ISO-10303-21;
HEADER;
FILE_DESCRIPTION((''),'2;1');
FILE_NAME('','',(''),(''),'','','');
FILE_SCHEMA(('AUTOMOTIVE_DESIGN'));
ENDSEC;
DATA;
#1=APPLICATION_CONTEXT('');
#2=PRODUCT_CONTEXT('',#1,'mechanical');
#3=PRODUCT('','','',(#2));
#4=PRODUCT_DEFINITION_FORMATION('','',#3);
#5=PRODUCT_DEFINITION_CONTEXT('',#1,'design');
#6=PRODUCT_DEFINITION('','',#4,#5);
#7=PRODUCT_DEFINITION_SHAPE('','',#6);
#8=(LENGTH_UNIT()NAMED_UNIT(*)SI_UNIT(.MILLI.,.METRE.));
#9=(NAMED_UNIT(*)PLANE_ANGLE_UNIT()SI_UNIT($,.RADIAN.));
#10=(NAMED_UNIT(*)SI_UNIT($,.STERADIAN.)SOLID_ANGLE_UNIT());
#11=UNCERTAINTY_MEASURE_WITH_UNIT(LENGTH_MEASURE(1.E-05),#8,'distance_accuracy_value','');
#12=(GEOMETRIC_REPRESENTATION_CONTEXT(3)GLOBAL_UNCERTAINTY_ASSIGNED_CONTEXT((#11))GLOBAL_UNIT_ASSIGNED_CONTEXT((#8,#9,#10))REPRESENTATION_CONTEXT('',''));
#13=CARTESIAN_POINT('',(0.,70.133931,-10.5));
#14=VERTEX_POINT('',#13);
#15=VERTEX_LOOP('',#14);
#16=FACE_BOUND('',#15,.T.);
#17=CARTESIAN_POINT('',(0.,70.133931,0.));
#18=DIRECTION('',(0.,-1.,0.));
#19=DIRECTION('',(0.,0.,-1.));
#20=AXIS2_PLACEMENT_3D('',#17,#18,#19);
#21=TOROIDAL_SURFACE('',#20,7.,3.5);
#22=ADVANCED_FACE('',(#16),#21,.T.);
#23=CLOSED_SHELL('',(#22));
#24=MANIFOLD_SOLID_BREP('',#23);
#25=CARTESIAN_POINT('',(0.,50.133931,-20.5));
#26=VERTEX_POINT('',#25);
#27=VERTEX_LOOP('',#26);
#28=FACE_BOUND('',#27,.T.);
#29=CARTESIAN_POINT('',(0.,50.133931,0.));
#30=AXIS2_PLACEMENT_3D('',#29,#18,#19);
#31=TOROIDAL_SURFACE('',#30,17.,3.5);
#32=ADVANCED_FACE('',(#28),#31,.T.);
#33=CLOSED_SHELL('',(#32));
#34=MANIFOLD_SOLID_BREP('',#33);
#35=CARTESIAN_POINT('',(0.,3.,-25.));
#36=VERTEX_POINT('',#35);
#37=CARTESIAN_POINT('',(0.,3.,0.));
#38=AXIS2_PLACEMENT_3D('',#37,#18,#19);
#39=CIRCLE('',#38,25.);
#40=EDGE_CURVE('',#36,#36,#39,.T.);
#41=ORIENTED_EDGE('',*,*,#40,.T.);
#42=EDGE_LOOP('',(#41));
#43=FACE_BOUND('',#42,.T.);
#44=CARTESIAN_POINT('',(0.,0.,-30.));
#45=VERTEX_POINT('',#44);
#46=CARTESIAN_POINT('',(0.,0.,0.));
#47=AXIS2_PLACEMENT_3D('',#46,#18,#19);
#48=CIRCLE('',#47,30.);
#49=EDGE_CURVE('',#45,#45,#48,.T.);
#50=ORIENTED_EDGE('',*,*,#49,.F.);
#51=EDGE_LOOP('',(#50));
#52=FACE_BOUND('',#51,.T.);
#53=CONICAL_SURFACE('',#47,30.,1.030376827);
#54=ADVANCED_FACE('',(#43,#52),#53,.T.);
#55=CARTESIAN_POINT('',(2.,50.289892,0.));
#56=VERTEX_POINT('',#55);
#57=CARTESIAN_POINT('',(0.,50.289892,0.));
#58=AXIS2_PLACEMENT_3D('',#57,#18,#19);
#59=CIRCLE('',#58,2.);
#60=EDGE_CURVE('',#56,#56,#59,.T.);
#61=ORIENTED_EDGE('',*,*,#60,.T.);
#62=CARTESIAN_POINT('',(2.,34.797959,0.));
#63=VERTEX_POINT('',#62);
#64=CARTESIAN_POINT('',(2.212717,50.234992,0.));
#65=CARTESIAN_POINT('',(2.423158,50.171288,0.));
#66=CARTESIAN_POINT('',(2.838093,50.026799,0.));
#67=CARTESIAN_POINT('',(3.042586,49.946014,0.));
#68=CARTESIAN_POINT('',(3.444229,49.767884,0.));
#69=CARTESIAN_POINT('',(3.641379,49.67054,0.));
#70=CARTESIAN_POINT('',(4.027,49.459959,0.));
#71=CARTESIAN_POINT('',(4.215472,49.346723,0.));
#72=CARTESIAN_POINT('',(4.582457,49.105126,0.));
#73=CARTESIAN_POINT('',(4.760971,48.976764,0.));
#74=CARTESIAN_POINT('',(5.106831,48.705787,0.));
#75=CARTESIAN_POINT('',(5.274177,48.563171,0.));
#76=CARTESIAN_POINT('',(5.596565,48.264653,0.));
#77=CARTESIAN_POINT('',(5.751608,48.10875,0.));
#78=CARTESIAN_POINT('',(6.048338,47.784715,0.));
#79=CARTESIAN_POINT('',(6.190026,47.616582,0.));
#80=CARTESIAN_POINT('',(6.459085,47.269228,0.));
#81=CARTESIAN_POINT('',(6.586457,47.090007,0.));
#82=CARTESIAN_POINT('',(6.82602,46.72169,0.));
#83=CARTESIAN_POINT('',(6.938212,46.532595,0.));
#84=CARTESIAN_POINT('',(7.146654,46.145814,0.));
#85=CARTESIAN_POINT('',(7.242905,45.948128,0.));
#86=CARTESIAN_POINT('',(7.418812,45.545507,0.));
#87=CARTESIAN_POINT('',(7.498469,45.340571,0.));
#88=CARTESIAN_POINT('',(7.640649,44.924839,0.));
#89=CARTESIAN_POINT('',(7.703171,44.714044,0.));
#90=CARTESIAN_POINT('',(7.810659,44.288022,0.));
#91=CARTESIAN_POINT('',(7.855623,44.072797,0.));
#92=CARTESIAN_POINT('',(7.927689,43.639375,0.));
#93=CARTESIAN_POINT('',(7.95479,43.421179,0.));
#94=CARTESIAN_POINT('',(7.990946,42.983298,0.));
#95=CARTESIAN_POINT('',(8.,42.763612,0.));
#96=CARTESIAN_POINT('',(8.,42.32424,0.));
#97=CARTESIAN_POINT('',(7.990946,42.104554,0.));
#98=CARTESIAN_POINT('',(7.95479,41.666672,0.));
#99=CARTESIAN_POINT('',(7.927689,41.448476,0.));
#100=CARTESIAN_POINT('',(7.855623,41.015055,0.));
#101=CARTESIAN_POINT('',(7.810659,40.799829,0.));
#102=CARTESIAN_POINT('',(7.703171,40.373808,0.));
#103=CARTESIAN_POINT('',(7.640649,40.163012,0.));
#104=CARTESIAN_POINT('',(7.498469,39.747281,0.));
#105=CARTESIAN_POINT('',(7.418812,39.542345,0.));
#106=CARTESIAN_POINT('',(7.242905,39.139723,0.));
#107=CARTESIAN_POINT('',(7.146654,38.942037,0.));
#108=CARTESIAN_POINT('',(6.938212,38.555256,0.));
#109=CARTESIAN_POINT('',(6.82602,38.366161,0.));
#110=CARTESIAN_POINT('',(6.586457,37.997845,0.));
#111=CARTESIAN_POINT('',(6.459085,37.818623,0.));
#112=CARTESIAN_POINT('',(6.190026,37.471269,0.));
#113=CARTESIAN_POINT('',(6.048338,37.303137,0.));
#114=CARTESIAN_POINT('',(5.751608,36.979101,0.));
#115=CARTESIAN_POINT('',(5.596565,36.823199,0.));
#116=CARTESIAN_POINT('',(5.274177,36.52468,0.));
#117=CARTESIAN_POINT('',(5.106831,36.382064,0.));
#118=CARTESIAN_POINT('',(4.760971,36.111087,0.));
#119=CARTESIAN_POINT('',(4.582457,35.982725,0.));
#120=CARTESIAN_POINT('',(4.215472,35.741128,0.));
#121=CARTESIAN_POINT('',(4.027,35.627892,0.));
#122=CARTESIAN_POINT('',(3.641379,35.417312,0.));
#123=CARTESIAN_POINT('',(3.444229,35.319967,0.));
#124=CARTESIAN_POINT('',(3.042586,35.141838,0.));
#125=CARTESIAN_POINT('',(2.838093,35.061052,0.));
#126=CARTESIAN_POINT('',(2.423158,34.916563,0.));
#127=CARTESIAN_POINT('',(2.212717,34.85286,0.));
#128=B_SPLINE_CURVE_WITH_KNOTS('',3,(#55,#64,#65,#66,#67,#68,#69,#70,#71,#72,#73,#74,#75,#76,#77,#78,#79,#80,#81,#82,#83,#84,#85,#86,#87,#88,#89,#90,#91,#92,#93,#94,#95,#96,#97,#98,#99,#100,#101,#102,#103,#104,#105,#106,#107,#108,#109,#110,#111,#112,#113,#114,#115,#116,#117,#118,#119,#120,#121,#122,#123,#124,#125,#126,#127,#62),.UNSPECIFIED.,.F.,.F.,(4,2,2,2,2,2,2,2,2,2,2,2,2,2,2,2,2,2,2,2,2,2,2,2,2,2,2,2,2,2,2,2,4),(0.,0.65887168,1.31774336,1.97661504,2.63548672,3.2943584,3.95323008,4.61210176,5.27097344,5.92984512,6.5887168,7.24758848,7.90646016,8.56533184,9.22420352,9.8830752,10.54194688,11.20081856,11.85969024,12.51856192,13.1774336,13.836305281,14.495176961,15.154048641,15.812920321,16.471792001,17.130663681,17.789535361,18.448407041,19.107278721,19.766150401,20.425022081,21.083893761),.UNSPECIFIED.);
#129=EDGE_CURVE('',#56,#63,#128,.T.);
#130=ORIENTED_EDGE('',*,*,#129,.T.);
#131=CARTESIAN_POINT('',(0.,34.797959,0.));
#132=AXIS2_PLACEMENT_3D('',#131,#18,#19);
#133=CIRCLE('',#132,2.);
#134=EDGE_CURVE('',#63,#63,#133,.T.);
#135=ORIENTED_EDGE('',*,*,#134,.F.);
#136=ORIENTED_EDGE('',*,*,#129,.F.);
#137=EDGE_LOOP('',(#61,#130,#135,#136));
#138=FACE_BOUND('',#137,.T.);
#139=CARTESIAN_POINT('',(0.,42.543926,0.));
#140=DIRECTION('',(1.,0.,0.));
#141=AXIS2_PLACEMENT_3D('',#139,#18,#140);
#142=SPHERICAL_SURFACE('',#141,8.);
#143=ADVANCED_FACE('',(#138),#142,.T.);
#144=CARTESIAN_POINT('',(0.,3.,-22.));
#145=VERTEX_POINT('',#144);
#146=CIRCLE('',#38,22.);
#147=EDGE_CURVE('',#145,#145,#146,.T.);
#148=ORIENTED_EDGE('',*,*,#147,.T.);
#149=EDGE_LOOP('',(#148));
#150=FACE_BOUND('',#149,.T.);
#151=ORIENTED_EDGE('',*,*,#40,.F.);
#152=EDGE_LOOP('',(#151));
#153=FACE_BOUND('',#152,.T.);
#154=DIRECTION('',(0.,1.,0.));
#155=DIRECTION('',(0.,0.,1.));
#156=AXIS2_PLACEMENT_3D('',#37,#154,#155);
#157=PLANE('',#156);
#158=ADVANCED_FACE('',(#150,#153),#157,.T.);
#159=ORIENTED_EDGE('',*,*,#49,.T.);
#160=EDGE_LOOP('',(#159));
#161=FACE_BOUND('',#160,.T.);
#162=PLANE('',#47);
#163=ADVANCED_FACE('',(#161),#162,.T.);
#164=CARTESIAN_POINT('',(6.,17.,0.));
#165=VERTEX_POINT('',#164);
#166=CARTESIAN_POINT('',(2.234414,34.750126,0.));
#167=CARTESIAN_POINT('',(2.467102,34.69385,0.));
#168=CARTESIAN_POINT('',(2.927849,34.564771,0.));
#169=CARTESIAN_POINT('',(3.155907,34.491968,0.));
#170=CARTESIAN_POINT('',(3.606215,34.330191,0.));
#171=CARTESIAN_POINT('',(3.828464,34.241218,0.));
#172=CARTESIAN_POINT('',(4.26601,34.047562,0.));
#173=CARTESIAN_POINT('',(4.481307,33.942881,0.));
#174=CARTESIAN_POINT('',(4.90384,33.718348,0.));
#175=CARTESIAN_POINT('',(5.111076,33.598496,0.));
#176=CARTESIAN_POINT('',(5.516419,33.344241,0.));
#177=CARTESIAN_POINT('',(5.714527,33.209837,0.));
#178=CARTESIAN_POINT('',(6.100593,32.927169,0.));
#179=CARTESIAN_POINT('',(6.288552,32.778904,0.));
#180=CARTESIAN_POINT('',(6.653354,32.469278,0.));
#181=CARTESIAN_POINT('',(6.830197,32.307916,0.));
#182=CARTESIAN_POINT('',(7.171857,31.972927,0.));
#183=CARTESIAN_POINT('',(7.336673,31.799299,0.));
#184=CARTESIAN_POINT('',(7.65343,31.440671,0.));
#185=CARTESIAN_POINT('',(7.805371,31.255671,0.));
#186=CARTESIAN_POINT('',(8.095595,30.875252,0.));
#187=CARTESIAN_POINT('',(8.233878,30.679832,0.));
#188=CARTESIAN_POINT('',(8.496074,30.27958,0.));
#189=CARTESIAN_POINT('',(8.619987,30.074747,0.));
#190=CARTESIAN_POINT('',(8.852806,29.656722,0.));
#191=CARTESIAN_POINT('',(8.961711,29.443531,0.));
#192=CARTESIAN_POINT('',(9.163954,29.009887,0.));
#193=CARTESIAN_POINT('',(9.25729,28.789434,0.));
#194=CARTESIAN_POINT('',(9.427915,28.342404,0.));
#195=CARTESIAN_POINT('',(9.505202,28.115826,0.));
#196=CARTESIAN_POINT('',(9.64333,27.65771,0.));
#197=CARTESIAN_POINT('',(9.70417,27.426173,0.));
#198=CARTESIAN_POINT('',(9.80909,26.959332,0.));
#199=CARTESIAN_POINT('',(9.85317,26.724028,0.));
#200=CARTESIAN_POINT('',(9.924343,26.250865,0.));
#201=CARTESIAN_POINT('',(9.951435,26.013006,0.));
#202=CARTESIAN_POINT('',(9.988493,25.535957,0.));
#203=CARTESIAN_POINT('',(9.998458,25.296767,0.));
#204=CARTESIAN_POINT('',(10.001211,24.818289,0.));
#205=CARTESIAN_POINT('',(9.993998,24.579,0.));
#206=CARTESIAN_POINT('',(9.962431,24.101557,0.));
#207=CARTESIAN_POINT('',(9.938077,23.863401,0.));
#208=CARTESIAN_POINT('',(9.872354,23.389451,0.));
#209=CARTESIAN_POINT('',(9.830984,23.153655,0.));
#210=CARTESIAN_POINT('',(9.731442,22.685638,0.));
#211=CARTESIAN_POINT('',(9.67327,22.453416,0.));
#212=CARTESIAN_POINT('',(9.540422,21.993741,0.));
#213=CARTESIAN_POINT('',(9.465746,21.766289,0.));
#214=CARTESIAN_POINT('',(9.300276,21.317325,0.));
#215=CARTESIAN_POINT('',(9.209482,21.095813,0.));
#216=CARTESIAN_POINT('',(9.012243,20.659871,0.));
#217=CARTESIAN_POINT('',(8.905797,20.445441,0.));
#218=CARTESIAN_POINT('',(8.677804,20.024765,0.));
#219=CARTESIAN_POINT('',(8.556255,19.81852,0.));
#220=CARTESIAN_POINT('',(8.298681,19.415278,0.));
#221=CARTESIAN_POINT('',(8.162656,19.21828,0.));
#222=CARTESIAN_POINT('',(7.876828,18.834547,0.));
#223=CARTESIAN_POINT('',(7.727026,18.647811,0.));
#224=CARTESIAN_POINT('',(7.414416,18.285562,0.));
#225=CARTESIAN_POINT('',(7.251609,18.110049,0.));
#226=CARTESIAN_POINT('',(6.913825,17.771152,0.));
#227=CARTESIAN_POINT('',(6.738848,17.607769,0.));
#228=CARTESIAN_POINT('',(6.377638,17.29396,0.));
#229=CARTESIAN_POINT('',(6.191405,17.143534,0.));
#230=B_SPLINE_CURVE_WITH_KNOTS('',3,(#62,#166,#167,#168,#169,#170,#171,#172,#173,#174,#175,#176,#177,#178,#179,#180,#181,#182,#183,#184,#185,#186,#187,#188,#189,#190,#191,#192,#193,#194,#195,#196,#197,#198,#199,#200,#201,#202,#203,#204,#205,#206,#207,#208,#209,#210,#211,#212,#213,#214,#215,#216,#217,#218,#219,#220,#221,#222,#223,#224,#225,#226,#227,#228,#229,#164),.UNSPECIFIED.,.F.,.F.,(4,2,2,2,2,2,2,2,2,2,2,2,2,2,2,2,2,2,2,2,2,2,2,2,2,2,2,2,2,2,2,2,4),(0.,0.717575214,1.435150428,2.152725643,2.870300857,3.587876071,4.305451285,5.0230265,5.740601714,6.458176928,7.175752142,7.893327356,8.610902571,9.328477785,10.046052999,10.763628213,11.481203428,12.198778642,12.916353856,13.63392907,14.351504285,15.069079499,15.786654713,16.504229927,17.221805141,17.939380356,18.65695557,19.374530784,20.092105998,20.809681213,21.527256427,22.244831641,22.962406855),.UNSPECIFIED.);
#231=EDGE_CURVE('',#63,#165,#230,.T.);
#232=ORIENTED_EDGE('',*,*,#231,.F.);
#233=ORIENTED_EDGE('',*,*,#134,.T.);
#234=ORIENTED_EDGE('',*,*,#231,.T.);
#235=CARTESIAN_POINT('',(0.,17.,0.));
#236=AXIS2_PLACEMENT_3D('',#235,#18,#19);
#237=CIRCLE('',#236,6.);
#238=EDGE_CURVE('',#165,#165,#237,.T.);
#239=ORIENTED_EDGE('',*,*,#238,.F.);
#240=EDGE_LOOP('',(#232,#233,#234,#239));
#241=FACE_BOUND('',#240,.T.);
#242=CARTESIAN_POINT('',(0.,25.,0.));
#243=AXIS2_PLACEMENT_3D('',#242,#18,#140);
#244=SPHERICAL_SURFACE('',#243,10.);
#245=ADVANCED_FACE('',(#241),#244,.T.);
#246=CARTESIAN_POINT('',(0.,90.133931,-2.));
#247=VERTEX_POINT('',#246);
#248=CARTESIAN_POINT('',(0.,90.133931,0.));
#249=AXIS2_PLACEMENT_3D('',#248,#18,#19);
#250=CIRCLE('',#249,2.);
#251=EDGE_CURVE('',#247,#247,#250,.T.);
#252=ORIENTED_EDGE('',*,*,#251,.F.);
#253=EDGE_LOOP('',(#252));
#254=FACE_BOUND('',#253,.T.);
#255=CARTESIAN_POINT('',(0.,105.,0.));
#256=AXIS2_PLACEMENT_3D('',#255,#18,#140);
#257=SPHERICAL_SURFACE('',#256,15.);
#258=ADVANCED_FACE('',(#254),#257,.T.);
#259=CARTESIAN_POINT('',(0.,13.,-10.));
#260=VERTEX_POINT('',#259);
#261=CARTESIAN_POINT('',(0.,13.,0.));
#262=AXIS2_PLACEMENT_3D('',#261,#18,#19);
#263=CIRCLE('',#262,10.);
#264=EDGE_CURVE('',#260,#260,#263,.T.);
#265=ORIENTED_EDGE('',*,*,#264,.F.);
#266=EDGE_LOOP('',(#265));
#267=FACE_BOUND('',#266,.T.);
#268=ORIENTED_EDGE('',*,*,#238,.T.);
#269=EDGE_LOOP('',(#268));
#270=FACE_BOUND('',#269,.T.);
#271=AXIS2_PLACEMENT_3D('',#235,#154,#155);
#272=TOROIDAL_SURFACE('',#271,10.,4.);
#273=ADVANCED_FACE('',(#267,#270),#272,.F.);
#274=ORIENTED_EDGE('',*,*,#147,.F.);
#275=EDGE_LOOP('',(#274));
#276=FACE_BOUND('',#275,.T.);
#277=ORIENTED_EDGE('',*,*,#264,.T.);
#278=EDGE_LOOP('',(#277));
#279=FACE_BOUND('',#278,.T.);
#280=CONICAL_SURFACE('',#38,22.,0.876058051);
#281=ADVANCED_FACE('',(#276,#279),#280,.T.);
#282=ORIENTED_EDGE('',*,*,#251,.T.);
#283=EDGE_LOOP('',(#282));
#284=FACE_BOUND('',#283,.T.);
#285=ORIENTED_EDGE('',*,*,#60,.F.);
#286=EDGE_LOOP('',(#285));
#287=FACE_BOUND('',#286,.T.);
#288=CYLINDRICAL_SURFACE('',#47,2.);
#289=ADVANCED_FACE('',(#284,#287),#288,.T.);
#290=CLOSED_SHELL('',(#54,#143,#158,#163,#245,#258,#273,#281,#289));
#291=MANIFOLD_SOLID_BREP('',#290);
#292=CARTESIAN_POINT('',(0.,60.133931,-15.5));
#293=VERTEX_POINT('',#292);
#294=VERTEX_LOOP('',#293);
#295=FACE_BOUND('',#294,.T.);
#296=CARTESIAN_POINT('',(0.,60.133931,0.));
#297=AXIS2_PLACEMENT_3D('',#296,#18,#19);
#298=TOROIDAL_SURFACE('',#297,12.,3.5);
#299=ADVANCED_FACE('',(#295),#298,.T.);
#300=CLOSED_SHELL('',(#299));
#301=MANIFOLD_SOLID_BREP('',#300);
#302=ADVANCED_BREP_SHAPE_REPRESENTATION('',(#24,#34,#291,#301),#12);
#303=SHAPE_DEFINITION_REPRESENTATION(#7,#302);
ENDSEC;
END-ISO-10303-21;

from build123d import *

# Parameters (mm, degrees)
SKETCH_1_R = 3.5
FILLET_3_R = 4


with BuildPart() as part:
    # 草图1 → 旋转1 (revolve)
    with BuildSketch(Plane.XY, mode=Mode.PRIVATE) as revolve_1_sk:
        with BuildLine():
            Line((0, 0), (0, 120))
            ThreePointArc((0, 120), (14.966479733, 106.002239689), (2, 90.133931253))
            Line((2, 90.133931253), (2, 50.289892356))
            ThreePointArc((2, 50.289892356), (8, 42.543925664), (2, 34.797958971))
            ThreePointArc((2, 34.797958971), (9.756630355, 27.192752634), (6, 17))
            Line((6, 17), (6, 13))
            Line((6, 13), (10, 13))
            Line((10, 13), (22, 3))
            Line((22, 3), (25, 3))
            Line((25, 3), (30, 0))
            Line((30, 0), (0, 0))
        make_face()
        with Locations((7, 70.133931253)):
            Circle(SKETCH_1_R)
        with Locations((12, 60.133931253)):
            Circle(SKETCH_1_R)
        with Locations((17, 50.133931253)):
            Circle(SKETCH_1_R)
    revolve(revolve_1_sk.sketch.rotate(Axis((0, 0, 0), (0, 1, 0)), 90), axis=Axis((0, 0, 0), (0, 1, 0)))

    # 圆角3
    fillet_3_edges = [part.edges().sort_by_distance(p)[0] for p in [
        (0, 13, 6),
    ]]
    fillet(fillet_3_edges, radius=FILLET_3_R - 0.0001)  # a hair under: the kernel refuses the full size


solid = part.part
